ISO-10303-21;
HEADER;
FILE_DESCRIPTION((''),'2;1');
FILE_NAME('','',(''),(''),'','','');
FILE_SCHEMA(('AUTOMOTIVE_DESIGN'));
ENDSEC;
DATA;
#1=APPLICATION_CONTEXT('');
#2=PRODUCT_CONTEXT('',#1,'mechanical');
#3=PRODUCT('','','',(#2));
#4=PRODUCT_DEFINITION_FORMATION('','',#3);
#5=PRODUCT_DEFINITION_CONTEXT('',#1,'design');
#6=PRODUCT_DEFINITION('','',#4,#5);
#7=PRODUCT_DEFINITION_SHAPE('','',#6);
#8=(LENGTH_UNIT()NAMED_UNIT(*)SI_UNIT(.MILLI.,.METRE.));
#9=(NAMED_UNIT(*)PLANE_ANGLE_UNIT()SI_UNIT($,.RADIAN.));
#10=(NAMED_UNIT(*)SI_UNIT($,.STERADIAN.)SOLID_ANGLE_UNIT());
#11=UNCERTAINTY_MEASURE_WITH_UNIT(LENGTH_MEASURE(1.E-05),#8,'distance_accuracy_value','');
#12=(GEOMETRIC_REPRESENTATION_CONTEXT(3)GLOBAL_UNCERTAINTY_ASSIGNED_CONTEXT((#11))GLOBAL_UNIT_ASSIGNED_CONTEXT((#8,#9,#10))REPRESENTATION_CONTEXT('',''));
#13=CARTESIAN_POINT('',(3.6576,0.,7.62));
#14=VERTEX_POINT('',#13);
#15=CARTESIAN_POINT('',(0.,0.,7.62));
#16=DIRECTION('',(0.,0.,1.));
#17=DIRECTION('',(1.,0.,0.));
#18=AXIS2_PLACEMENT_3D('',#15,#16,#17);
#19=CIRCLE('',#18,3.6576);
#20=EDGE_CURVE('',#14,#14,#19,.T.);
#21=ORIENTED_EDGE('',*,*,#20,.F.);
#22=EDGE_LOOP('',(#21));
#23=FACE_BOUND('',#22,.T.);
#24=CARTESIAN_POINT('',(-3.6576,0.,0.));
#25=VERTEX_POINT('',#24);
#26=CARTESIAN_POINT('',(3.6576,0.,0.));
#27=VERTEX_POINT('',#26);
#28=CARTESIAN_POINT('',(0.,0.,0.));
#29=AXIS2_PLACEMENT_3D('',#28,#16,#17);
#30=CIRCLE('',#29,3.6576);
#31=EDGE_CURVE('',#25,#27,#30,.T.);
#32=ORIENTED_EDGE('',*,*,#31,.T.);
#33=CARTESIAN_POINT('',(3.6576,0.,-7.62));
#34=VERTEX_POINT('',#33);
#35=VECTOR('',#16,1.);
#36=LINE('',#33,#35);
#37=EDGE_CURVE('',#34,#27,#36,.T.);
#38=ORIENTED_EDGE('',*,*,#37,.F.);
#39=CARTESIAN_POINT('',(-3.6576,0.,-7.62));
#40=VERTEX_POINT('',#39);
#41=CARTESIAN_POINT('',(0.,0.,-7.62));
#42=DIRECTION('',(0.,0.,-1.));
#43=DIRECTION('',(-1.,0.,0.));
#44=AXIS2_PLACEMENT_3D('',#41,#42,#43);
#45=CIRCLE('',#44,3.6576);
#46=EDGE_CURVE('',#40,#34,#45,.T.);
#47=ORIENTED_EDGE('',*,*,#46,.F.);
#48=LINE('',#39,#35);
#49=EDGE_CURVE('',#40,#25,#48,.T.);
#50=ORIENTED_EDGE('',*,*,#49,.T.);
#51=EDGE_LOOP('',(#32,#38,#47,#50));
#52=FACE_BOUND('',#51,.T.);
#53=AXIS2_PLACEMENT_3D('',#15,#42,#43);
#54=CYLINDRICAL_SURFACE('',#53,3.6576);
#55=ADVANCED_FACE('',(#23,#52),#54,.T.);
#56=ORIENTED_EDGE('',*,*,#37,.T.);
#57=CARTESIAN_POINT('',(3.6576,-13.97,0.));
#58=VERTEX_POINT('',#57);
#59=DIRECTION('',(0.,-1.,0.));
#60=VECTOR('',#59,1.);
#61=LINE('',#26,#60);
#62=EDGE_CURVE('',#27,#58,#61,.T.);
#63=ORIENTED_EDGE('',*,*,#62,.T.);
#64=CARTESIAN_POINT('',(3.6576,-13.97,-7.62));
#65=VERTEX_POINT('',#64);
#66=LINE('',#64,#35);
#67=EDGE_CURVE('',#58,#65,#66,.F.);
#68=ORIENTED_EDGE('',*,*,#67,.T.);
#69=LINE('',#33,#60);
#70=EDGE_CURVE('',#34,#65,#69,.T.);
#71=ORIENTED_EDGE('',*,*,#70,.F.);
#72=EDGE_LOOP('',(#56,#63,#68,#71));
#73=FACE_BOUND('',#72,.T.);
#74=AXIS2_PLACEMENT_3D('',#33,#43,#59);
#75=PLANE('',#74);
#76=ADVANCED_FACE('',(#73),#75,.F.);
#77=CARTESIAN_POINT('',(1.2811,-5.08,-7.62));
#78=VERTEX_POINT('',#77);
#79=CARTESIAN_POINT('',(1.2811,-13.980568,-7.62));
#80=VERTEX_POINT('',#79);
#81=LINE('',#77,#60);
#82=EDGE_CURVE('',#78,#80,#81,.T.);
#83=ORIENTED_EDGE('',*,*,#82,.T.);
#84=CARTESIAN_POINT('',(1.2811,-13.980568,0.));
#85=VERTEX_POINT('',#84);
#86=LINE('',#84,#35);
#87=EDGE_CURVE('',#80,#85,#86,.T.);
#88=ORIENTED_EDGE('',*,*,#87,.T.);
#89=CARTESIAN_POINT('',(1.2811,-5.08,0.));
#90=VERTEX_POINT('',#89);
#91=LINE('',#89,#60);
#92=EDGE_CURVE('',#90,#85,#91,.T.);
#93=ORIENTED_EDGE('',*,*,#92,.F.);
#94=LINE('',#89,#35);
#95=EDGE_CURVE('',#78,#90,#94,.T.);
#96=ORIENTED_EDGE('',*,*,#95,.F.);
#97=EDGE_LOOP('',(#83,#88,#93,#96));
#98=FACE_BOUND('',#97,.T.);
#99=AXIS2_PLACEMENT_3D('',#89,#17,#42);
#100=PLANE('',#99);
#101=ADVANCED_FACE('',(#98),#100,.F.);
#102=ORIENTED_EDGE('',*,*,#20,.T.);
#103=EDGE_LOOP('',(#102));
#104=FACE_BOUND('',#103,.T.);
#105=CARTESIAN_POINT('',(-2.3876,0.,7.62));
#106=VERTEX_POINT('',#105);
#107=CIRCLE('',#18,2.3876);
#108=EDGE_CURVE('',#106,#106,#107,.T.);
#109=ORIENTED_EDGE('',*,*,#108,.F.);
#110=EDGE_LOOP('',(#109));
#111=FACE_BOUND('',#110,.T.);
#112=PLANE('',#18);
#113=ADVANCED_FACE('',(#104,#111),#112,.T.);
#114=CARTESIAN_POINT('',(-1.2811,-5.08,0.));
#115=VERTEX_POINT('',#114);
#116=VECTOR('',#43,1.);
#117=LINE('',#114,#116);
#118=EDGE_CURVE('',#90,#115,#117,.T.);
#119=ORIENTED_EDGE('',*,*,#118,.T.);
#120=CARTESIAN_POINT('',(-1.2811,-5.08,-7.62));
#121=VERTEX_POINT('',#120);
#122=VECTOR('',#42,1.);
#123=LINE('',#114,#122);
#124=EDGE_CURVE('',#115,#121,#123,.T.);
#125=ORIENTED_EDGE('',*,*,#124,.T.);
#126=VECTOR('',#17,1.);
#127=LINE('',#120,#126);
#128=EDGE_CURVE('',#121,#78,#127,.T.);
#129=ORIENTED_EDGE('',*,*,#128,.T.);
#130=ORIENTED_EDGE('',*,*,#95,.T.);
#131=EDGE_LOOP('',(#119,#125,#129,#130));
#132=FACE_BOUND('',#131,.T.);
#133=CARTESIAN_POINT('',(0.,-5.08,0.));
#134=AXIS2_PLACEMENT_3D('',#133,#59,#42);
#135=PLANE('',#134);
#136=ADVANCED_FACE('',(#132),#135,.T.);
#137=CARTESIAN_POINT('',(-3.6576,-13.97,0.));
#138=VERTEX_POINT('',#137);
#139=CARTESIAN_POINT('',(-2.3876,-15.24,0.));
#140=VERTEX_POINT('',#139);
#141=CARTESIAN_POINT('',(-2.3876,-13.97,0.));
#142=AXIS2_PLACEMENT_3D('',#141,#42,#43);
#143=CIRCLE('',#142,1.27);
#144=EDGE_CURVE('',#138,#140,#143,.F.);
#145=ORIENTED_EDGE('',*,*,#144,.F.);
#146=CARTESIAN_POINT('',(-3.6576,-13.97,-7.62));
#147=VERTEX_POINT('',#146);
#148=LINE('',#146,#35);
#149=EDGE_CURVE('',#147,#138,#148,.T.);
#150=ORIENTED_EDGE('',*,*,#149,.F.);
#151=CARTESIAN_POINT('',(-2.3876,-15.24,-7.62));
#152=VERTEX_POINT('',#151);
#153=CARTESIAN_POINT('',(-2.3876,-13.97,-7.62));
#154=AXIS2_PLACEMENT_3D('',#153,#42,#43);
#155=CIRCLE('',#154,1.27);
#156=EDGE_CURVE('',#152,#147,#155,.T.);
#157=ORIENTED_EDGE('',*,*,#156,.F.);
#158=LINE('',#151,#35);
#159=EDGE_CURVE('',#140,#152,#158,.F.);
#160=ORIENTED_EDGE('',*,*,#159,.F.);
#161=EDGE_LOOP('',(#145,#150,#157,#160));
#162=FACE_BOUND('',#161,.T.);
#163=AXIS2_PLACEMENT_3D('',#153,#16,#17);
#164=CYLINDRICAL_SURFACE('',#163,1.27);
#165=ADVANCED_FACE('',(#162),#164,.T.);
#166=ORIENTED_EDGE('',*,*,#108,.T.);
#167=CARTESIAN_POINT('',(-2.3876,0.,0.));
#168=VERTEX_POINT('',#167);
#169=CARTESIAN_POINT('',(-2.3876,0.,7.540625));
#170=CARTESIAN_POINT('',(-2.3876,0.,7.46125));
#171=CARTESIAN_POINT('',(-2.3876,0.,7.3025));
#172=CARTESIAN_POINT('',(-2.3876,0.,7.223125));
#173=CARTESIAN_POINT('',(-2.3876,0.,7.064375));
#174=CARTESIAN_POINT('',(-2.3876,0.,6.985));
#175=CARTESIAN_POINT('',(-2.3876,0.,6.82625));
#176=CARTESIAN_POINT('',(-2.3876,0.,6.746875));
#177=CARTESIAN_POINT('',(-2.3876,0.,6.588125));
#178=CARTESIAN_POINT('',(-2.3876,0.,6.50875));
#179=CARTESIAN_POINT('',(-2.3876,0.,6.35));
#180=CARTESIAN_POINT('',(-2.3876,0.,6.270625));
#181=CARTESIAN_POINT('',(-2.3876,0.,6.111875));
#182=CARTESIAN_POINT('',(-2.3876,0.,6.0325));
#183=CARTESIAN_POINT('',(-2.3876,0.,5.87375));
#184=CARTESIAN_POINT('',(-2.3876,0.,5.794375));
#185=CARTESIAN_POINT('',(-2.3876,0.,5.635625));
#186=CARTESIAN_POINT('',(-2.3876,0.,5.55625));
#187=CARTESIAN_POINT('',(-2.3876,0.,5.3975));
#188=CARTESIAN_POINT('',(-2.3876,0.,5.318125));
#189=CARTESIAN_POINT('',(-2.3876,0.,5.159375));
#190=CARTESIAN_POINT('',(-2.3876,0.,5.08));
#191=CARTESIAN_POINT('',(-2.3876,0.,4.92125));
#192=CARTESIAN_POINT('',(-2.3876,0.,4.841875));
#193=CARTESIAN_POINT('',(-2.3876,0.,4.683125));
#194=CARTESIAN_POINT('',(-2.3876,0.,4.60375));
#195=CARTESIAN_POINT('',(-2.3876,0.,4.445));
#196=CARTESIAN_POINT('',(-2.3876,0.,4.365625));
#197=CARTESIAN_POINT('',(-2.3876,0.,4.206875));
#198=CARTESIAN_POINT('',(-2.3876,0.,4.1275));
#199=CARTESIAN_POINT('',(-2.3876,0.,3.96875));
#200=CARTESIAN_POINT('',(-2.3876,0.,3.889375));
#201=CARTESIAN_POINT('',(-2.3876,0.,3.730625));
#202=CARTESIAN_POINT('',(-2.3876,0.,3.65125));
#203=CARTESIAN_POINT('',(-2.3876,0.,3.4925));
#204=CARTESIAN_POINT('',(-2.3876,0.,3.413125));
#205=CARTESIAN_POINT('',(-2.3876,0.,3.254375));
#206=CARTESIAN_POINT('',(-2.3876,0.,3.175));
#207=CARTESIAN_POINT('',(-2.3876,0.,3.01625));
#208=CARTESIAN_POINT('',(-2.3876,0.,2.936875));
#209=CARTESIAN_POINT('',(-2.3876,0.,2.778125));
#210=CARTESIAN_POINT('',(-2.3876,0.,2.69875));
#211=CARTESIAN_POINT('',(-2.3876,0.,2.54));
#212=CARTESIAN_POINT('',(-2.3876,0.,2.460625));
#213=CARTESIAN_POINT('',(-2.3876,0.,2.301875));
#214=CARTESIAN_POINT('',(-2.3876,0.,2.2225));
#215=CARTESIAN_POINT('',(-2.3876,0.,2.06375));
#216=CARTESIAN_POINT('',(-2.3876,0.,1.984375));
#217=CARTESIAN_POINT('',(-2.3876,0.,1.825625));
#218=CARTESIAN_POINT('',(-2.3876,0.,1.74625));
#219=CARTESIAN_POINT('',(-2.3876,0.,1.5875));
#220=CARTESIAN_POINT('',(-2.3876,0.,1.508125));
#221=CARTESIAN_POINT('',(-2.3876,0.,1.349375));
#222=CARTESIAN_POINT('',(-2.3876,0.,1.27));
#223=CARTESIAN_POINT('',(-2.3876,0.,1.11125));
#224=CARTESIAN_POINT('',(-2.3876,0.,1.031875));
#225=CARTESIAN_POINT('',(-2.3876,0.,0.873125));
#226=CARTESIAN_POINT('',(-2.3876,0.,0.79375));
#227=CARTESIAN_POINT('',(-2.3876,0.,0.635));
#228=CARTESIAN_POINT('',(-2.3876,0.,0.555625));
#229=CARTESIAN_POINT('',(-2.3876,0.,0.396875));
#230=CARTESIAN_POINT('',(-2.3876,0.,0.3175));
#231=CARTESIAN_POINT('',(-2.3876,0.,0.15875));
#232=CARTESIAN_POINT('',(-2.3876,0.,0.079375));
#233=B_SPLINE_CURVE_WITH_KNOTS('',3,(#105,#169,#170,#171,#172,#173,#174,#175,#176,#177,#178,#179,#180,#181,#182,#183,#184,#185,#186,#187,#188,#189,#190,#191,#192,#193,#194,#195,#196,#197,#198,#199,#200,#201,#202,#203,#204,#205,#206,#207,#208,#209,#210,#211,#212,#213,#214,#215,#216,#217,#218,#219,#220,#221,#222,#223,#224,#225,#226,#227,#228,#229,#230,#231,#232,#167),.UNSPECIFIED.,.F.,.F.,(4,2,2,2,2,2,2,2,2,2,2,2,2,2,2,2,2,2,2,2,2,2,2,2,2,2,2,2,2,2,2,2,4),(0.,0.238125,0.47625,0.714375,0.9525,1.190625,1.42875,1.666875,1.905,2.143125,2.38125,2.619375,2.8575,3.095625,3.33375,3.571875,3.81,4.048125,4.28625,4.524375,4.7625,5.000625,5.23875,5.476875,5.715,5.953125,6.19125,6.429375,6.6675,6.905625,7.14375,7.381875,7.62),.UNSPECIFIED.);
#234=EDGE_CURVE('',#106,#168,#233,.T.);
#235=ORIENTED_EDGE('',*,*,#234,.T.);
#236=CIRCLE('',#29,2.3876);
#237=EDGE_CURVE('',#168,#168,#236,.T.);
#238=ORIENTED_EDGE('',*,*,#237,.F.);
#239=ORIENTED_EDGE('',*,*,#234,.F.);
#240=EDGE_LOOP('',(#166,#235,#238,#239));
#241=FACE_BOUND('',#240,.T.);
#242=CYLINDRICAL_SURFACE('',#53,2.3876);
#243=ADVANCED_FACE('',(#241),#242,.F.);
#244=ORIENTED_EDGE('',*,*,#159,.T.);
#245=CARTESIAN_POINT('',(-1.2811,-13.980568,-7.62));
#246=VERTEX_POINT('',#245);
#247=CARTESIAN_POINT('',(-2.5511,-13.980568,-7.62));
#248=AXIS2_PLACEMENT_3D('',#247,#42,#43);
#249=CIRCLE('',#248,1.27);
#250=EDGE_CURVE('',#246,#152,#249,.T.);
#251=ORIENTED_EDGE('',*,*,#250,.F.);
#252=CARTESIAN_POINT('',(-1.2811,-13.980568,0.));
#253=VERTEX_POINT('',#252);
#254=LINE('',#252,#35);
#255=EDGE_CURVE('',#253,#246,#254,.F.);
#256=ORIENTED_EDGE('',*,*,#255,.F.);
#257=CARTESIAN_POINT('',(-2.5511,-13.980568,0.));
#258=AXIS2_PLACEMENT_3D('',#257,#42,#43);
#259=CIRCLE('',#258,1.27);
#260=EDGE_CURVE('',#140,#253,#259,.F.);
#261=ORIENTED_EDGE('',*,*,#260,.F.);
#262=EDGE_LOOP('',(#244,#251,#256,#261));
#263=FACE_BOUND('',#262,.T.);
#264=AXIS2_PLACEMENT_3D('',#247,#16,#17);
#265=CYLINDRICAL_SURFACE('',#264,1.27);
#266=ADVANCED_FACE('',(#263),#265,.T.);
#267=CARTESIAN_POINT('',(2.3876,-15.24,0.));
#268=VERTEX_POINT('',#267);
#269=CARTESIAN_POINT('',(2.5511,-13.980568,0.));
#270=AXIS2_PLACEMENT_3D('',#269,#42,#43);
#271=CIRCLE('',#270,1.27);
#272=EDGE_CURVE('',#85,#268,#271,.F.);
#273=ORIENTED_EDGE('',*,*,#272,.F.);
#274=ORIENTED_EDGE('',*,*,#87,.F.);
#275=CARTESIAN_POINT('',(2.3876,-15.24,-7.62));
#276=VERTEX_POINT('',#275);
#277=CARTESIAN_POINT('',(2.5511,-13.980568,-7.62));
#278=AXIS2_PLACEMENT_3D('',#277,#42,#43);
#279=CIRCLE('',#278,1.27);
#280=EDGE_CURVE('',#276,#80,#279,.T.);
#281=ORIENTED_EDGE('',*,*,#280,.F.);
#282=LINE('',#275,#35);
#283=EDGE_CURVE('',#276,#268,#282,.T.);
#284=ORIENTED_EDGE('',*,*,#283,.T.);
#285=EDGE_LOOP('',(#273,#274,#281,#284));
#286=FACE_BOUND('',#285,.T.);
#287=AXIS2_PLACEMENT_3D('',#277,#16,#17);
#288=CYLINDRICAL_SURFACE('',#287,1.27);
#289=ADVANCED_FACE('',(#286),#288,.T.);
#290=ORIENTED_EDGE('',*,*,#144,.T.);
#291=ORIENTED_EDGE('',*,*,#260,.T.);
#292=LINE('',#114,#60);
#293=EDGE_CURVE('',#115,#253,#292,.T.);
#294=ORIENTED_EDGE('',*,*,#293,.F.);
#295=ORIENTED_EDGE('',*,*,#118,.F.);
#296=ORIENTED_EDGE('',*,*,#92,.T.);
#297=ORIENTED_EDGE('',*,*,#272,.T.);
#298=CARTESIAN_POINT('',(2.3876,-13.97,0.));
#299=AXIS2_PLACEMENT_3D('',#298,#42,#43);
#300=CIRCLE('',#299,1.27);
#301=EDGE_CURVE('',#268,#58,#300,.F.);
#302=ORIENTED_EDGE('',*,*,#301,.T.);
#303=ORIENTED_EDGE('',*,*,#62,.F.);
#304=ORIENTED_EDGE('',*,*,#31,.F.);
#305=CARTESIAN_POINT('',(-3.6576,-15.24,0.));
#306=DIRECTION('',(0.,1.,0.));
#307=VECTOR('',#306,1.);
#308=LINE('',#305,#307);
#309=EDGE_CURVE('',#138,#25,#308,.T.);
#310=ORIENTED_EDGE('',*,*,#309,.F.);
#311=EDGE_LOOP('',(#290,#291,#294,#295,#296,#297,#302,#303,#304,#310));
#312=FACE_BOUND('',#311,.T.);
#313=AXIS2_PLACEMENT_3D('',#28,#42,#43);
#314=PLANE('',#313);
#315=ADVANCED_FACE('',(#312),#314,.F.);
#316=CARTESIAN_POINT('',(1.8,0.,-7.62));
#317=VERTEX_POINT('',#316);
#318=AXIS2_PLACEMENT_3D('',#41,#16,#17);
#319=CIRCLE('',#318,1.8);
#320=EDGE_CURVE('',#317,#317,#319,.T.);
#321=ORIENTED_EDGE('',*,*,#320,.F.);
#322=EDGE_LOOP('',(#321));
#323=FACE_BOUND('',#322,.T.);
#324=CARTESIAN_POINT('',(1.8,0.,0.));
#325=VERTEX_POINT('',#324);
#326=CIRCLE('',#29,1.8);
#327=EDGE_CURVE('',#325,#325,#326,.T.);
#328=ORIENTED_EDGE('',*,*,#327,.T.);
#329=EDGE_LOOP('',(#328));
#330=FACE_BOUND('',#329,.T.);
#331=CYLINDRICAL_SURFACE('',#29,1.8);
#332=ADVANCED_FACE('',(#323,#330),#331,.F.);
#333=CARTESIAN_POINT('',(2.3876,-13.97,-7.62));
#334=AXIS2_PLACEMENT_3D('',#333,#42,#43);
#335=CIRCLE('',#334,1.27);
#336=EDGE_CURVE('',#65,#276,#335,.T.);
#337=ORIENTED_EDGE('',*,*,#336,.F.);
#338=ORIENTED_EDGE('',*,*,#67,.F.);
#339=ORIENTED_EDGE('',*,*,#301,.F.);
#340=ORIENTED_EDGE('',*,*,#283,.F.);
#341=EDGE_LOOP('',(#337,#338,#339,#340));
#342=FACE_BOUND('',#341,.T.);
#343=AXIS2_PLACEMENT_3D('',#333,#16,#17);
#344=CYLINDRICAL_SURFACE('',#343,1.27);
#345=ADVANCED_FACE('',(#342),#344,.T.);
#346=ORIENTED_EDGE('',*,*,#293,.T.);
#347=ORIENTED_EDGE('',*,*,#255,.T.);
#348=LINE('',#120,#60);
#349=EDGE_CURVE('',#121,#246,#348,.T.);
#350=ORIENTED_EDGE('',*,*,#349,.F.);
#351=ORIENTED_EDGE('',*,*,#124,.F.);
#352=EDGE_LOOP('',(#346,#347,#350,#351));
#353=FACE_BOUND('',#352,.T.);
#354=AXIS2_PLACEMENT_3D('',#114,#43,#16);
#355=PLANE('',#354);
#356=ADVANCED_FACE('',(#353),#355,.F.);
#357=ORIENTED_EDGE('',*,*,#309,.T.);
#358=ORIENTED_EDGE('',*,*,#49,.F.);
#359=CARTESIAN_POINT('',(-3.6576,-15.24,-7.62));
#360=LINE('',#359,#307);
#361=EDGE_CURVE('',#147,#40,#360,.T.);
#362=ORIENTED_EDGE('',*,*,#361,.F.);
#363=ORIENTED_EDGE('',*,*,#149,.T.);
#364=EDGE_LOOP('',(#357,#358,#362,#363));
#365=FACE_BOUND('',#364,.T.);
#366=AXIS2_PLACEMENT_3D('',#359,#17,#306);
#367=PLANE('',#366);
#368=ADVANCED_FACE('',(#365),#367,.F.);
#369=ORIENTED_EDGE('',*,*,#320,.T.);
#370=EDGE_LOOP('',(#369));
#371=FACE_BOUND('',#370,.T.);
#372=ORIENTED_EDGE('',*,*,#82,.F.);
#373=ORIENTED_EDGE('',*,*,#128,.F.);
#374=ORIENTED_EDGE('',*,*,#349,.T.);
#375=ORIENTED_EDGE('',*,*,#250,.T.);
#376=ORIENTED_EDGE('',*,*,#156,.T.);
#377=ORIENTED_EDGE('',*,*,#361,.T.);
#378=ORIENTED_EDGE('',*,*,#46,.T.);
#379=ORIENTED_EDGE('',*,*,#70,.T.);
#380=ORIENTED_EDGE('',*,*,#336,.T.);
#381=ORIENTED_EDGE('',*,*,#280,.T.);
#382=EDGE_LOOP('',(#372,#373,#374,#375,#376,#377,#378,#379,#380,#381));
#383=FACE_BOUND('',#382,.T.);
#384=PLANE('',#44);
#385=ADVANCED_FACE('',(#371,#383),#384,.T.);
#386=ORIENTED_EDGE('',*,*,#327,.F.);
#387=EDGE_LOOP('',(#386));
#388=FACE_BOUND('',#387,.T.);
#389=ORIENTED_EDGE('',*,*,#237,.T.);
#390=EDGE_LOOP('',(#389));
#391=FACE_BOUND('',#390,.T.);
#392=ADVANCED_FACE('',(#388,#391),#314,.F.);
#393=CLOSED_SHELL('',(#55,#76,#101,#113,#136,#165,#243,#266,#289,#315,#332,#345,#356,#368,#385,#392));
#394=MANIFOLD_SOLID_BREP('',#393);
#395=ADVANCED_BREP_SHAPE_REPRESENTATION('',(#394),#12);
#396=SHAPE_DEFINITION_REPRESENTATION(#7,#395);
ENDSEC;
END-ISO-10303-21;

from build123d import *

# Parameters (mm, degrees)
SKETCH1_R            = 3.6576
SKETCH1_R_2          = 2.3876
BOSS_EXTRUDE1_DEPTH  = 7.62
BOSS_EXTRUDE2_START  = 7.62
BOSS_EXTRUDE2_DEPTH  = 7.62
FILLET1_R            = 1.27
SKETCH5_W            = 2.5622
SKETCH5_H            = 7.62
CUT_EXTRUDE1_DEPTH   = 10.16
FILLET2_R            = 1.27
M3_CLEARANCE_HOLE1_D = 3.6


with BuildPart() as part:
    # Sketch1 → Boss-Extrude1 (new body)
    with BuildSketch(Plane.XY):
        with Locations(Location((0, 0, 0), (0, 0, 180))):
            Circle(SKETCH1_R)
        with Locations(Location((0, 0, 0), (0, 0, 180))):
            Circle(SKETCH1_R_2, mode=Mode.SUBTRACT)
    extrude(amount=BOSS_EXTRUDE1_DEPTH)

    # Sketch4 → Boss-Extrude2 (add)
    with BuildSketch(Plane(origin=(0, 0, 0), x_dir=(-1, 0, 0), z_dir=(0, 0, -1)).offset(BOSS_EXTRUDE2_START)):
        with BuildLine():
            Line((-3.6576, 0), (-3.6576, -15.24))
            Line((-3.6576, -15.24), (3.6576, -15.24))
            Line((3.6576, -15.24), (3.6576, 0))
            ThreePointArc((3.6576, 0), (0, 3.6576), (-3.6576, 0))
        make_face()
    extrude(amount=-BOSS_EXTRUDE2_DEPTH)

    # Fillet1
    fillet1_edges = [part.edges().sort_by_distance(p)[0] for p in [
        (3.6576, -15.24, -3.81),
        (-3.6576, -15.24, -3.81),
    ]]
    fillet(fillet1_edges, radius=FILLET1_R)

    # Sketch5 → Cut-Extrude1 (cut)
    with BuildSketch(Plane.XZ.offset(15.24)):
        with Locations((0, -3.81)):
            Rectangle(SKETCH5_W, SKETCH5_H)
    extrude(amount=-CUT_EXTRUDE1_DEPTH, mode=Mode.SUBTRACT)

    # Fillet2
    # the kernel refuses this fillet: 1.27 mm, written as the material it takes off along each edge
    with BuildSketch(Plane(origin=(1.2811, -15.24, 3.148578796), x_dir=(0, 1, 0), z_dir=(0, 0, -1))) as fillet2_piece_1:
        with BuildLine():
            CenterArc((1.259431519, 1.27), FILLET2_R, 187.396796907, 82.603203093)
            Line((0, 1.1065), (-0.02518863, 1.10323))
            ThreePointArc((-0.02518863, 1.10323), (-0.0254, 0.55325), (-0.0254, 0))
            Line((-0.0254, 0), (0, -0.0254))
            Line((0, -0.0254), (1.259431519, -0.0254))
            Line((1.259431519, -0.0254), (1.259431519, 0))
        make_face()
    extrude(amount=13.917157593, mode=Mode.SUBTRACT)
    with BuildSketch(Plane(origin=(-1.2811, -15.24, -10.768578796), x_dir=(-1, 0, 0), z_dir=(0, 0, 1))) as fillet2_piece_2:
        with BuildLine():
            CenterArc((1.27, -1.259431519), FILLET2_R, 97.396796907, 82.603203093)
            Line((0, -1.259431519), (-0.0254, -1.259431519))
            Line((-0.0254, -1.259431519), (-0.0254, 0))
            Line((-0.0254, 0), (0, 0.0254))
            ThreePointArc((0, 0.0254), (0.55325, 0.0254), (1.10323, 0.02518863))
            Line((1.10323, 0.02518863), (1.1065, 0))
        make_face()
    extrude(amount=13.917157593, mode=Mode.SUBTRACT)

    # M3 Clearance Hole1 (through all)
    with Locations(Plane.XY):
        with Locations((0, 0)):
            Hole(M3_CLEARANCE_HOLE1_D / 2)


solid = part.part
